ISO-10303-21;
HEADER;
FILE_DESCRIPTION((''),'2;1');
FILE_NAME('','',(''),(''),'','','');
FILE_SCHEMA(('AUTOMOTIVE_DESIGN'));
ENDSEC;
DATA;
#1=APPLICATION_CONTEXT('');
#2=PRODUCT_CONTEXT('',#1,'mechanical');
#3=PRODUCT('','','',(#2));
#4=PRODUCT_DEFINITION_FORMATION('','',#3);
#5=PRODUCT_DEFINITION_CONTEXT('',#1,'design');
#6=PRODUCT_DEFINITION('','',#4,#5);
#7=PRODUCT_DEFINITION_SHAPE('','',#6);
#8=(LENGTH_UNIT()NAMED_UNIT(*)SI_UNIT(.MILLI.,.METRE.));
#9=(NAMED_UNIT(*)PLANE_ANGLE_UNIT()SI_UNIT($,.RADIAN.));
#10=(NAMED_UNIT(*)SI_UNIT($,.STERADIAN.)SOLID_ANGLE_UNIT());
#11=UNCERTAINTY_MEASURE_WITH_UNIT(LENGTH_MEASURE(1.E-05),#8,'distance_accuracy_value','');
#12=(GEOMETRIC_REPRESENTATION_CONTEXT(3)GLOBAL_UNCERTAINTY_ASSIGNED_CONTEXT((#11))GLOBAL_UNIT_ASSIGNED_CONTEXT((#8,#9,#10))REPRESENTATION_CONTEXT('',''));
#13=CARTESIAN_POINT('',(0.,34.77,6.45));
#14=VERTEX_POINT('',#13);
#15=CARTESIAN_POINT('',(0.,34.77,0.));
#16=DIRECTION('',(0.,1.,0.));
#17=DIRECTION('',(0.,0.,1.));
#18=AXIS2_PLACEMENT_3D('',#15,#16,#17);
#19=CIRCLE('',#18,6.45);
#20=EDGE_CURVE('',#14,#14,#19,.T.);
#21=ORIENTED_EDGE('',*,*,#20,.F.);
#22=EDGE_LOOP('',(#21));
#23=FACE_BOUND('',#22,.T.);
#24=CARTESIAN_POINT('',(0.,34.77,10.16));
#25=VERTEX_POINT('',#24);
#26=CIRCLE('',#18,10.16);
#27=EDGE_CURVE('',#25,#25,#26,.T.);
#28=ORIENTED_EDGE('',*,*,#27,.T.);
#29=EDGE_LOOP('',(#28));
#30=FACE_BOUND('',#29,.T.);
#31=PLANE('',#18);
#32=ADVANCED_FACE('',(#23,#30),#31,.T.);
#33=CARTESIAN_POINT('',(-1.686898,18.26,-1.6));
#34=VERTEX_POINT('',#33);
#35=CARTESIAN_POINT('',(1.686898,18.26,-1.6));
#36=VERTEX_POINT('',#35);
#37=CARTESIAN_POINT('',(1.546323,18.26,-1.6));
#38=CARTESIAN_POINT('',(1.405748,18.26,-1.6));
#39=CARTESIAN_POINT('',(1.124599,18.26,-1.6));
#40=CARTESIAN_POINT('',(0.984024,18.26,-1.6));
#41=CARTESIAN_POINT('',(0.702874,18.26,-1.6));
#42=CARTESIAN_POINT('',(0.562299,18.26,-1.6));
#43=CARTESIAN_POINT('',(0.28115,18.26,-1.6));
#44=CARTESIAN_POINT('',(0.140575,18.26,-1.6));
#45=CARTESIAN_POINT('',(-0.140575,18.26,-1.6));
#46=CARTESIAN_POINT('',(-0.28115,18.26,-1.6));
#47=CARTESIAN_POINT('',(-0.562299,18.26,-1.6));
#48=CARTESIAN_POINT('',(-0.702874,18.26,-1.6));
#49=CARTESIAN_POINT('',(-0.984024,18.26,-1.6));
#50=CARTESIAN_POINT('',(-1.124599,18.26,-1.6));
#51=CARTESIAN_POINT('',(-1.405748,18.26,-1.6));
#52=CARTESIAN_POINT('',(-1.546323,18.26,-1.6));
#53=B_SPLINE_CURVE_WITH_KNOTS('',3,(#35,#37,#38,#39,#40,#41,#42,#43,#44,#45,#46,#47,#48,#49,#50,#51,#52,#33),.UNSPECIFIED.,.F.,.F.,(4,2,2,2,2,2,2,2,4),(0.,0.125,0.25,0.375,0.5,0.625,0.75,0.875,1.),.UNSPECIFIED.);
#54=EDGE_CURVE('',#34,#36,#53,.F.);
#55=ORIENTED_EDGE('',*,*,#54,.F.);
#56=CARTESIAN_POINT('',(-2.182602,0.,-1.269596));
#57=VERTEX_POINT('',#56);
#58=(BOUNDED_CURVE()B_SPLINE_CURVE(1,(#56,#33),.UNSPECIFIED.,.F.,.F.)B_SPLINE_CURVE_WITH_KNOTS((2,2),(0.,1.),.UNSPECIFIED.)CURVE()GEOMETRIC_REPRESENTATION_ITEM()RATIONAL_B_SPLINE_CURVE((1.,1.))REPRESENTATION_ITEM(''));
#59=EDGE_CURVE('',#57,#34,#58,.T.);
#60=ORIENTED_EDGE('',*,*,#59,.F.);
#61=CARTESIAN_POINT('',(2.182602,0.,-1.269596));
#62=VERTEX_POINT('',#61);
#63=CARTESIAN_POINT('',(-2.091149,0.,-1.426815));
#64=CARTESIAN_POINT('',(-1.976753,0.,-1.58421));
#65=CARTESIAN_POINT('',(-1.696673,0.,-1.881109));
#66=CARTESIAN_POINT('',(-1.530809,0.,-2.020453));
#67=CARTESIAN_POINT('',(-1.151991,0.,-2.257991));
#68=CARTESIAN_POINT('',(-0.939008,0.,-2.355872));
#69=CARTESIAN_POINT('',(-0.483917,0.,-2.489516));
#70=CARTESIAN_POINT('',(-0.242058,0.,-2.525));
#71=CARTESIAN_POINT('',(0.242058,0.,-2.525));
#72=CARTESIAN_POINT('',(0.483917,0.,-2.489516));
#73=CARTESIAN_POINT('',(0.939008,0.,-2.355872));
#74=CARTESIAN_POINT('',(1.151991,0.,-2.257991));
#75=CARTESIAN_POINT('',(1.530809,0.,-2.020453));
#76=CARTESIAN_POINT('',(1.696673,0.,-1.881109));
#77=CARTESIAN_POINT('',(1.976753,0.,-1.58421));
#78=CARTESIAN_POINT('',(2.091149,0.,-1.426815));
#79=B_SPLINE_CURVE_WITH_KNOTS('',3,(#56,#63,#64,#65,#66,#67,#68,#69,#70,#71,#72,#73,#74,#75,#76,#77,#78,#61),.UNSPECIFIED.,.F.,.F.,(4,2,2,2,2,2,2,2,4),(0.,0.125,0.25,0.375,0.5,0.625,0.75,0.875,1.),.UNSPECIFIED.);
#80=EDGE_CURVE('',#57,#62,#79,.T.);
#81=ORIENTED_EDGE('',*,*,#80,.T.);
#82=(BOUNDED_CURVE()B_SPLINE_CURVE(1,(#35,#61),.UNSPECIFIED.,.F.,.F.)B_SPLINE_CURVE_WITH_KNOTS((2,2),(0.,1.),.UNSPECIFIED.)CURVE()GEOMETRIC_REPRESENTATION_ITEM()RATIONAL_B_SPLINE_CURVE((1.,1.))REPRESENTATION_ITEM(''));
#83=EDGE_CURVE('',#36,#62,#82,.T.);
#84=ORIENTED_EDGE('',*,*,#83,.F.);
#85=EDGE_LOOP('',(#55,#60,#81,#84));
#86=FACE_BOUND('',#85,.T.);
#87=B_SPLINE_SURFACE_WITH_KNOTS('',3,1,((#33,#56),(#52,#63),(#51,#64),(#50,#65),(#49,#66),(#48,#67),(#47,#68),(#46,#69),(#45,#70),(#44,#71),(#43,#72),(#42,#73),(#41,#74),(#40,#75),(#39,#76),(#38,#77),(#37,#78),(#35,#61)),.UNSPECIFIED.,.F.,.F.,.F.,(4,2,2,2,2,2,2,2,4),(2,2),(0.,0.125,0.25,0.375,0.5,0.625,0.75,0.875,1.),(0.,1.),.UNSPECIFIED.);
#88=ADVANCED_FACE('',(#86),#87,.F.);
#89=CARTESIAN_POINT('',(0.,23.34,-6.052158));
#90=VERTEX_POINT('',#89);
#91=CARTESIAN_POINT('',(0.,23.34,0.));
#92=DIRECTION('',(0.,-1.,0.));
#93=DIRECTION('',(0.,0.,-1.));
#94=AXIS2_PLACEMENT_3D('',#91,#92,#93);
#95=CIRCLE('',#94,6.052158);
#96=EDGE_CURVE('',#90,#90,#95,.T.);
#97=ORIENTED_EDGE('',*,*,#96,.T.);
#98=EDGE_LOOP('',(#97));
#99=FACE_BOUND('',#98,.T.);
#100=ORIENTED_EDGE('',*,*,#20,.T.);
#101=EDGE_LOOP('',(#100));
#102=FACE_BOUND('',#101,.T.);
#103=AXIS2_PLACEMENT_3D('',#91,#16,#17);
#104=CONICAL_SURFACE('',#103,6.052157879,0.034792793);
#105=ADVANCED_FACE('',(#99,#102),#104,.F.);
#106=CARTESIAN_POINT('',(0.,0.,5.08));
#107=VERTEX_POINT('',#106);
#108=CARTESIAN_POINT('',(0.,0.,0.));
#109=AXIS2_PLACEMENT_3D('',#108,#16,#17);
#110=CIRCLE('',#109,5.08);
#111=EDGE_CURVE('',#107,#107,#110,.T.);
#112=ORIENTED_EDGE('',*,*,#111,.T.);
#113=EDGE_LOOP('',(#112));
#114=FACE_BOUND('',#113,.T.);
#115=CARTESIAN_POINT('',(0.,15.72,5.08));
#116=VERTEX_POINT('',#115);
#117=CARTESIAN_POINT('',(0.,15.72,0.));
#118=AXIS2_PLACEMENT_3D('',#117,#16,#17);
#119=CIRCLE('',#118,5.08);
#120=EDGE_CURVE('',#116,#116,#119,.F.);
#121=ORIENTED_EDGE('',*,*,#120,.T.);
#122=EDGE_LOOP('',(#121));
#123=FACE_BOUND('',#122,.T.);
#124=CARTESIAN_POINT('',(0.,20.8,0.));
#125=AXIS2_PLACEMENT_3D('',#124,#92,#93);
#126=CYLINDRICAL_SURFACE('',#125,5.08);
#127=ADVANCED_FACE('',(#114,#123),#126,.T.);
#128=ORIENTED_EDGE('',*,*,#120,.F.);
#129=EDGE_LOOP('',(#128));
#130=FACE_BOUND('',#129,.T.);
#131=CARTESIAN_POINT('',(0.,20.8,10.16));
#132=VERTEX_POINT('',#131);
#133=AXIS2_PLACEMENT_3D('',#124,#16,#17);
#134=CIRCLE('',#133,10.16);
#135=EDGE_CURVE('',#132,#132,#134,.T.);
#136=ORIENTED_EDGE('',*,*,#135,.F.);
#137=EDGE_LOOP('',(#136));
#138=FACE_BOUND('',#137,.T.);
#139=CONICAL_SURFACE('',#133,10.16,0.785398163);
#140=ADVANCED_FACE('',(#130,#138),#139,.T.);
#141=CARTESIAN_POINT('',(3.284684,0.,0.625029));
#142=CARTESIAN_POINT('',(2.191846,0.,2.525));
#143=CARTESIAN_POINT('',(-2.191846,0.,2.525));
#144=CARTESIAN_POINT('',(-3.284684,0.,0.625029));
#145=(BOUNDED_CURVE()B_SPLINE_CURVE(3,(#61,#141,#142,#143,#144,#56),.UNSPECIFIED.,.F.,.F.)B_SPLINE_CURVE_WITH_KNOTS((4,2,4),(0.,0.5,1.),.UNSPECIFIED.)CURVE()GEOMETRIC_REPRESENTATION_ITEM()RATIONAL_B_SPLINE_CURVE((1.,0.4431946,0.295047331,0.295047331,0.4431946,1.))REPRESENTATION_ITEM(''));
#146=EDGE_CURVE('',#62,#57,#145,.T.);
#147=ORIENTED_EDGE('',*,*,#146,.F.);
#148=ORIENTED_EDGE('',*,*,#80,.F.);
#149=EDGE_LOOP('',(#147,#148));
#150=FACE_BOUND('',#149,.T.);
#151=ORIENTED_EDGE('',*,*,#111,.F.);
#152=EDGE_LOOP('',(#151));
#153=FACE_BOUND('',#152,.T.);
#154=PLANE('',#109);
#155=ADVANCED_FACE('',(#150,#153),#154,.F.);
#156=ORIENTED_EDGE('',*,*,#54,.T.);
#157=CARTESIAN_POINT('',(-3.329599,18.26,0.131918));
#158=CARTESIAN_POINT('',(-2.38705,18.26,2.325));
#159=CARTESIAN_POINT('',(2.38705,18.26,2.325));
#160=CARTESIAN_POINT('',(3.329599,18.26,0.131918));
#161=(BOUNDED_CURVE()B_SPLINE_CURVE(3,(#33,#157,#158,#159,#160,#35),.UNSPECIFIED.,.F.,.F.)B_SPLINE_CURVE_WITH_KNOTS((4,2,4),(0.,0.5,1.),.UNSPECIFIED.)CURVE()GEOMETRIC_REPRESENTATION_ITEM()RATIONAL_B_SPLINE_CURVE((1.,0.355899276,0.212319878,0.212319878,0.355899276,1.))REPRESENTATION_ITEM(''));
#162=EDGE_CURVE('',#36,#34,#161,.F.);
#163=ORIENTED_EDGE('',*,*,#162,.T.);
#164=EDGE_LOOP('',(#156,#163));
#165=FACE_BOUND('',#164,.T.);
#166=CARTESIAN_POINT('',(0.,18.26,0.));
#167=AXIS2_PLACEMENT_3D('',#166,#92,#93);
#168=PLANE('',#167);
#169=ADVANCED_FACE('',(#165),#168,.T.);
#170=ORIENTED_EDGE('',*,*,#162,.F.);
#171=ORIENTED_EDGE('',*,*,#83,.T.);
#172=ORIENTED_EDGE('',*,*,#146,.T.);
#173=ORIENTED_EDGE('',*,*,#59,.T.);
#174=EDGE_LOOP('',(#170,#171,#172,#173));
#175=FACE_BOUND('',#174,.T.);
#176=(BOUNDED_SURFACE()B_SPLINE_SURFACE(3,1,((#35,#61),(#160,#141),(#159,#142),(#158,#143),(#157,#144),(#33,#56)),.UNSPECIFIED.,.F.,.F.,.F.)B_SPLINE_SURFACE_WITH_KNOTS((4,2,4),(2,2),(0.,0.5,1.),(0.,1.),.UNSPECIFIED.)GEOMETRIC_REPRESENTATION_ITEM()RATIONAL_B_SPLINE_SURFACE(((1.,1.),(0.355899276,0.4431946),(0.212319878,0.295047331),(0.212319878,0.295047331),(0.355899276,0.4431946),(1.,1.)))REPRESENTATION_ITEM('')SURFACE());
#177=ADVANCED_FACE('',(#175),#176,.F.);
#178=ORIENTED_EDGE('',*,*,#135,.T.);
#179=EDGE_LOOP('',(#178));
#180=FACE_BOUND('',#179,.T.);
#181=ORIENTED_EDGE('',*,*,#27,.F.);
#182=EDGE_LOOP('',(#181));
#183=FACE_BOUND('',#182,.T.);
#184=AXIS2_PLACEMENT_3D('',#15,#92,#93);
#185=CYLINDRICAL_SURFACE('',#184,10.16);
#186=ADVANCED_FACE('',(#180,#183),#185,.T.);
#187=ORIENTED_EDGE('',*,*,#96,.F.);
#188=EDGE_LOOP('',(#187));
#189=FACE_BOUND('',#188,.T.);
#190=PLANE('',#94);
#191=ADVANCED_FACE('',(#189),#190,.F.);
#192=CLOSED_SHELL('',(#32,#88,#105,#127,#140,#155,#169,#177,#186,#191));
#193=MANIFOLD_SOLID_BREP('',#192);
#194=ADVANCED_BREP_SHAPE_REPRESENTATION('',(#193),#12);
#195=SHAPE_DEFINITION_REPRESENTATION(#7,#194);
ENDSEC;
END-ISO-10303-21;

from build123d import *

# Parameters (mm, degrees)
SKETCH1_R           = 5.08
BOSS_EXTRUDE1_DEPTH = 20.8
SKETCH2_R           = 10.16
BOSS_EXTRUDE2_DEPTH = 13.97
SKETCH4_R           = 6.052157879
SKETCH3_R           = 6.450000054
CHAMFER1_SIZE       = 5.08


with BuildPart() as part:
    # Sketch1 → Boss-Extrude1 (new body)
    with BuildSketch(Plane(origin=(0, 0, 0), x_dir=(1, 0, 0), z_dir=(0, 1, 0))):
        with Locations(Location((0, 0, 0), (0, 0, 270))):
            Circle(SKETCH1_R)
    extrude(amount=BOSS_EXTRUDE1_DEPTH)

    # Sketch2 → Boss-Extrude2 (add)
    with BuildSketch(Plane(origin=(0, 20.8, 0), x_dir=(1, 0, 0), z_dir=(0, 1, 0))):
        with Locations(Location((0, 0, 0), (0, 0, 270))):
            Circle(SKETCH2_R)
    extrude(amount=BOSS_EXTRUDE2_DEPTH)

    # Sketch4 → Cut-Loft1 section 0
    with BuildSketch(Plane(origin=(0, 23.34, 0), x_dir=(-1, 0, 0), z_dir=(0, -1, 0))):
        Circle(SKETCH4_R)
    # Sketch3 → Cut-Loft1 section 1
    with BuildSketch(Plane(origin=(0, 34.77, 0), x_dir=(1, 0, 0), z_dir=(0, 1, 0))):
        Circle(SKETCH3_R)
    loft(mode=Mode.SUBTRACT)

    # Chamfer1
    chamfer1_edges = [part.edges().sort_by_distance(p)[0] for p in [
        (0, 20.8, -5.08),
    ]]
    chamfer(chamfer1_edges, length=CHAMFER1_SIZE - 0.0001)  # a hair under: the kernel refuses the full size

    # Cut-Loft2: read off the stored shape, not the designer's step
    # Cut-Loft2: loft between two sections, ruled curve by curve
    cut_loft2_from = [
        Edge.make_bspline([(-1.686897944, 18.26, -1.600000102), (-1.546323115, 18.26, -1.600000102), (-1.405748287, 18.26, -1.600000102), (-1.124598629, 18.26, -1.600000102), (-0.984023801, 18.26, -1.600000102), (-0.702874143, 18.26, -1.600000102), (-0.562299315, 18.26, -1.600000102), (-0.281149657, 18.26, -1.600000102), (-0.140574829, 18.26, -1.600000102), (0.140574829, 18.26, -1.600000102), (0.281149657, 18.26, -1.600000102), (0.562299315, 18.26, -1.600000102), (0.702874143, 18.26, -1.600000102), (0.984023801, 18.26, -1.600000102), (1.124598629, 18.26, -1.600000102), (1.405748287, 18.26, -1.600000102), (1.546323115, 18.26, -1.600000102), (1.686897944, 18.26, -1.600000102)], [0, 0, 0, 0, 0.125, 0.125, 0.25, 0.25, 0.375, 0.375, 0.5, 0.5, 0.625, 0.625, 0.75, 0.75, 0.875, 0.875, 1, 1, 1, 1], 3),
        Edge.make_bspline([(1.686897944, 18.26, -1.600000102), (3.329599086, 18.26, 0.131918024), (2.387049944, 18.26, 2.325), (-2.387049944, 18.26, 2.325), (-3.329599086, 18.26, 0.131918024), (-1.686897944, 18.26, -1.600000102)], [0, 0, 0, 0, 0.5, 0.5, 1, 1, 1, 1], 3, [1, 0.355899276, 0.212319878, 0.212319878, 0.355899276, 1]),
    ]
    cut_loft2_to = [
        Edge.make_bspline([(-2.182602074, 0, -1.269595679), (-2.091149197, 0, -1.426815211), (-1.976752522, 0, -1.584210464), (-1.696673404, 0, -1.88110943), (-1.530809339, 0, -2.020452874), (-1.151990541, 0, -2.25799133), (-0.939007592, 0, -2.355871773), (-0.483917032, 0, -2.489516293), (-0.242057859, 0, -2.525), (0.242057859, 0, -2.525), (0.483917032, 0, -2.489516293), (0.939007592, 0, -2.355871773), (1.151990541, 0, -2.25799133), (1.530809339, 0, -2.020452874), (1.696673404, 0, -1.88110943), (1.976752522, 0, -1.584210464), (2.091149197, 0, -1.426815211), (2.182602074, 0, -1.269595679)], [0, 0, 0, 0, 0.125, 0.125, 0.25, 0.25, 0.375, 0.375, 0.5, 0.5, 0.625, 0.625, 0.75, 0.75, 0.875, 0.875, 1, 1, 1, 1], 3),
        Edge.make_bspline([(2.182602074, 0, -1.269595679), (3.284684333, 0, 0.625028778), (2.191845601, 0, 2.525), (-2.191845601, 0, 2.525), (-3.284684333, 0, 0.625028778), (-2.182602074, 0, -1.269595679)], [0, 0, 0, 0, 0.5, 0.5, 1, 1, 1, 1], 3, [1, 0.4431946, 0.295047331, 0.295047331, 0.4431946, 1]),
    ]
    cut_loft2 = Solid(Shell([*[Face.make_surface_from_curves(cut_loft2_from[k], cut_loft2_to[k]) for k in range(2)], Face(Wire(cut_loft2_from)), Face(Wire(cut_loft2_to))]))
    add(cut_loft2, mode=Mode.SUBTRACT)


solid = part.part
